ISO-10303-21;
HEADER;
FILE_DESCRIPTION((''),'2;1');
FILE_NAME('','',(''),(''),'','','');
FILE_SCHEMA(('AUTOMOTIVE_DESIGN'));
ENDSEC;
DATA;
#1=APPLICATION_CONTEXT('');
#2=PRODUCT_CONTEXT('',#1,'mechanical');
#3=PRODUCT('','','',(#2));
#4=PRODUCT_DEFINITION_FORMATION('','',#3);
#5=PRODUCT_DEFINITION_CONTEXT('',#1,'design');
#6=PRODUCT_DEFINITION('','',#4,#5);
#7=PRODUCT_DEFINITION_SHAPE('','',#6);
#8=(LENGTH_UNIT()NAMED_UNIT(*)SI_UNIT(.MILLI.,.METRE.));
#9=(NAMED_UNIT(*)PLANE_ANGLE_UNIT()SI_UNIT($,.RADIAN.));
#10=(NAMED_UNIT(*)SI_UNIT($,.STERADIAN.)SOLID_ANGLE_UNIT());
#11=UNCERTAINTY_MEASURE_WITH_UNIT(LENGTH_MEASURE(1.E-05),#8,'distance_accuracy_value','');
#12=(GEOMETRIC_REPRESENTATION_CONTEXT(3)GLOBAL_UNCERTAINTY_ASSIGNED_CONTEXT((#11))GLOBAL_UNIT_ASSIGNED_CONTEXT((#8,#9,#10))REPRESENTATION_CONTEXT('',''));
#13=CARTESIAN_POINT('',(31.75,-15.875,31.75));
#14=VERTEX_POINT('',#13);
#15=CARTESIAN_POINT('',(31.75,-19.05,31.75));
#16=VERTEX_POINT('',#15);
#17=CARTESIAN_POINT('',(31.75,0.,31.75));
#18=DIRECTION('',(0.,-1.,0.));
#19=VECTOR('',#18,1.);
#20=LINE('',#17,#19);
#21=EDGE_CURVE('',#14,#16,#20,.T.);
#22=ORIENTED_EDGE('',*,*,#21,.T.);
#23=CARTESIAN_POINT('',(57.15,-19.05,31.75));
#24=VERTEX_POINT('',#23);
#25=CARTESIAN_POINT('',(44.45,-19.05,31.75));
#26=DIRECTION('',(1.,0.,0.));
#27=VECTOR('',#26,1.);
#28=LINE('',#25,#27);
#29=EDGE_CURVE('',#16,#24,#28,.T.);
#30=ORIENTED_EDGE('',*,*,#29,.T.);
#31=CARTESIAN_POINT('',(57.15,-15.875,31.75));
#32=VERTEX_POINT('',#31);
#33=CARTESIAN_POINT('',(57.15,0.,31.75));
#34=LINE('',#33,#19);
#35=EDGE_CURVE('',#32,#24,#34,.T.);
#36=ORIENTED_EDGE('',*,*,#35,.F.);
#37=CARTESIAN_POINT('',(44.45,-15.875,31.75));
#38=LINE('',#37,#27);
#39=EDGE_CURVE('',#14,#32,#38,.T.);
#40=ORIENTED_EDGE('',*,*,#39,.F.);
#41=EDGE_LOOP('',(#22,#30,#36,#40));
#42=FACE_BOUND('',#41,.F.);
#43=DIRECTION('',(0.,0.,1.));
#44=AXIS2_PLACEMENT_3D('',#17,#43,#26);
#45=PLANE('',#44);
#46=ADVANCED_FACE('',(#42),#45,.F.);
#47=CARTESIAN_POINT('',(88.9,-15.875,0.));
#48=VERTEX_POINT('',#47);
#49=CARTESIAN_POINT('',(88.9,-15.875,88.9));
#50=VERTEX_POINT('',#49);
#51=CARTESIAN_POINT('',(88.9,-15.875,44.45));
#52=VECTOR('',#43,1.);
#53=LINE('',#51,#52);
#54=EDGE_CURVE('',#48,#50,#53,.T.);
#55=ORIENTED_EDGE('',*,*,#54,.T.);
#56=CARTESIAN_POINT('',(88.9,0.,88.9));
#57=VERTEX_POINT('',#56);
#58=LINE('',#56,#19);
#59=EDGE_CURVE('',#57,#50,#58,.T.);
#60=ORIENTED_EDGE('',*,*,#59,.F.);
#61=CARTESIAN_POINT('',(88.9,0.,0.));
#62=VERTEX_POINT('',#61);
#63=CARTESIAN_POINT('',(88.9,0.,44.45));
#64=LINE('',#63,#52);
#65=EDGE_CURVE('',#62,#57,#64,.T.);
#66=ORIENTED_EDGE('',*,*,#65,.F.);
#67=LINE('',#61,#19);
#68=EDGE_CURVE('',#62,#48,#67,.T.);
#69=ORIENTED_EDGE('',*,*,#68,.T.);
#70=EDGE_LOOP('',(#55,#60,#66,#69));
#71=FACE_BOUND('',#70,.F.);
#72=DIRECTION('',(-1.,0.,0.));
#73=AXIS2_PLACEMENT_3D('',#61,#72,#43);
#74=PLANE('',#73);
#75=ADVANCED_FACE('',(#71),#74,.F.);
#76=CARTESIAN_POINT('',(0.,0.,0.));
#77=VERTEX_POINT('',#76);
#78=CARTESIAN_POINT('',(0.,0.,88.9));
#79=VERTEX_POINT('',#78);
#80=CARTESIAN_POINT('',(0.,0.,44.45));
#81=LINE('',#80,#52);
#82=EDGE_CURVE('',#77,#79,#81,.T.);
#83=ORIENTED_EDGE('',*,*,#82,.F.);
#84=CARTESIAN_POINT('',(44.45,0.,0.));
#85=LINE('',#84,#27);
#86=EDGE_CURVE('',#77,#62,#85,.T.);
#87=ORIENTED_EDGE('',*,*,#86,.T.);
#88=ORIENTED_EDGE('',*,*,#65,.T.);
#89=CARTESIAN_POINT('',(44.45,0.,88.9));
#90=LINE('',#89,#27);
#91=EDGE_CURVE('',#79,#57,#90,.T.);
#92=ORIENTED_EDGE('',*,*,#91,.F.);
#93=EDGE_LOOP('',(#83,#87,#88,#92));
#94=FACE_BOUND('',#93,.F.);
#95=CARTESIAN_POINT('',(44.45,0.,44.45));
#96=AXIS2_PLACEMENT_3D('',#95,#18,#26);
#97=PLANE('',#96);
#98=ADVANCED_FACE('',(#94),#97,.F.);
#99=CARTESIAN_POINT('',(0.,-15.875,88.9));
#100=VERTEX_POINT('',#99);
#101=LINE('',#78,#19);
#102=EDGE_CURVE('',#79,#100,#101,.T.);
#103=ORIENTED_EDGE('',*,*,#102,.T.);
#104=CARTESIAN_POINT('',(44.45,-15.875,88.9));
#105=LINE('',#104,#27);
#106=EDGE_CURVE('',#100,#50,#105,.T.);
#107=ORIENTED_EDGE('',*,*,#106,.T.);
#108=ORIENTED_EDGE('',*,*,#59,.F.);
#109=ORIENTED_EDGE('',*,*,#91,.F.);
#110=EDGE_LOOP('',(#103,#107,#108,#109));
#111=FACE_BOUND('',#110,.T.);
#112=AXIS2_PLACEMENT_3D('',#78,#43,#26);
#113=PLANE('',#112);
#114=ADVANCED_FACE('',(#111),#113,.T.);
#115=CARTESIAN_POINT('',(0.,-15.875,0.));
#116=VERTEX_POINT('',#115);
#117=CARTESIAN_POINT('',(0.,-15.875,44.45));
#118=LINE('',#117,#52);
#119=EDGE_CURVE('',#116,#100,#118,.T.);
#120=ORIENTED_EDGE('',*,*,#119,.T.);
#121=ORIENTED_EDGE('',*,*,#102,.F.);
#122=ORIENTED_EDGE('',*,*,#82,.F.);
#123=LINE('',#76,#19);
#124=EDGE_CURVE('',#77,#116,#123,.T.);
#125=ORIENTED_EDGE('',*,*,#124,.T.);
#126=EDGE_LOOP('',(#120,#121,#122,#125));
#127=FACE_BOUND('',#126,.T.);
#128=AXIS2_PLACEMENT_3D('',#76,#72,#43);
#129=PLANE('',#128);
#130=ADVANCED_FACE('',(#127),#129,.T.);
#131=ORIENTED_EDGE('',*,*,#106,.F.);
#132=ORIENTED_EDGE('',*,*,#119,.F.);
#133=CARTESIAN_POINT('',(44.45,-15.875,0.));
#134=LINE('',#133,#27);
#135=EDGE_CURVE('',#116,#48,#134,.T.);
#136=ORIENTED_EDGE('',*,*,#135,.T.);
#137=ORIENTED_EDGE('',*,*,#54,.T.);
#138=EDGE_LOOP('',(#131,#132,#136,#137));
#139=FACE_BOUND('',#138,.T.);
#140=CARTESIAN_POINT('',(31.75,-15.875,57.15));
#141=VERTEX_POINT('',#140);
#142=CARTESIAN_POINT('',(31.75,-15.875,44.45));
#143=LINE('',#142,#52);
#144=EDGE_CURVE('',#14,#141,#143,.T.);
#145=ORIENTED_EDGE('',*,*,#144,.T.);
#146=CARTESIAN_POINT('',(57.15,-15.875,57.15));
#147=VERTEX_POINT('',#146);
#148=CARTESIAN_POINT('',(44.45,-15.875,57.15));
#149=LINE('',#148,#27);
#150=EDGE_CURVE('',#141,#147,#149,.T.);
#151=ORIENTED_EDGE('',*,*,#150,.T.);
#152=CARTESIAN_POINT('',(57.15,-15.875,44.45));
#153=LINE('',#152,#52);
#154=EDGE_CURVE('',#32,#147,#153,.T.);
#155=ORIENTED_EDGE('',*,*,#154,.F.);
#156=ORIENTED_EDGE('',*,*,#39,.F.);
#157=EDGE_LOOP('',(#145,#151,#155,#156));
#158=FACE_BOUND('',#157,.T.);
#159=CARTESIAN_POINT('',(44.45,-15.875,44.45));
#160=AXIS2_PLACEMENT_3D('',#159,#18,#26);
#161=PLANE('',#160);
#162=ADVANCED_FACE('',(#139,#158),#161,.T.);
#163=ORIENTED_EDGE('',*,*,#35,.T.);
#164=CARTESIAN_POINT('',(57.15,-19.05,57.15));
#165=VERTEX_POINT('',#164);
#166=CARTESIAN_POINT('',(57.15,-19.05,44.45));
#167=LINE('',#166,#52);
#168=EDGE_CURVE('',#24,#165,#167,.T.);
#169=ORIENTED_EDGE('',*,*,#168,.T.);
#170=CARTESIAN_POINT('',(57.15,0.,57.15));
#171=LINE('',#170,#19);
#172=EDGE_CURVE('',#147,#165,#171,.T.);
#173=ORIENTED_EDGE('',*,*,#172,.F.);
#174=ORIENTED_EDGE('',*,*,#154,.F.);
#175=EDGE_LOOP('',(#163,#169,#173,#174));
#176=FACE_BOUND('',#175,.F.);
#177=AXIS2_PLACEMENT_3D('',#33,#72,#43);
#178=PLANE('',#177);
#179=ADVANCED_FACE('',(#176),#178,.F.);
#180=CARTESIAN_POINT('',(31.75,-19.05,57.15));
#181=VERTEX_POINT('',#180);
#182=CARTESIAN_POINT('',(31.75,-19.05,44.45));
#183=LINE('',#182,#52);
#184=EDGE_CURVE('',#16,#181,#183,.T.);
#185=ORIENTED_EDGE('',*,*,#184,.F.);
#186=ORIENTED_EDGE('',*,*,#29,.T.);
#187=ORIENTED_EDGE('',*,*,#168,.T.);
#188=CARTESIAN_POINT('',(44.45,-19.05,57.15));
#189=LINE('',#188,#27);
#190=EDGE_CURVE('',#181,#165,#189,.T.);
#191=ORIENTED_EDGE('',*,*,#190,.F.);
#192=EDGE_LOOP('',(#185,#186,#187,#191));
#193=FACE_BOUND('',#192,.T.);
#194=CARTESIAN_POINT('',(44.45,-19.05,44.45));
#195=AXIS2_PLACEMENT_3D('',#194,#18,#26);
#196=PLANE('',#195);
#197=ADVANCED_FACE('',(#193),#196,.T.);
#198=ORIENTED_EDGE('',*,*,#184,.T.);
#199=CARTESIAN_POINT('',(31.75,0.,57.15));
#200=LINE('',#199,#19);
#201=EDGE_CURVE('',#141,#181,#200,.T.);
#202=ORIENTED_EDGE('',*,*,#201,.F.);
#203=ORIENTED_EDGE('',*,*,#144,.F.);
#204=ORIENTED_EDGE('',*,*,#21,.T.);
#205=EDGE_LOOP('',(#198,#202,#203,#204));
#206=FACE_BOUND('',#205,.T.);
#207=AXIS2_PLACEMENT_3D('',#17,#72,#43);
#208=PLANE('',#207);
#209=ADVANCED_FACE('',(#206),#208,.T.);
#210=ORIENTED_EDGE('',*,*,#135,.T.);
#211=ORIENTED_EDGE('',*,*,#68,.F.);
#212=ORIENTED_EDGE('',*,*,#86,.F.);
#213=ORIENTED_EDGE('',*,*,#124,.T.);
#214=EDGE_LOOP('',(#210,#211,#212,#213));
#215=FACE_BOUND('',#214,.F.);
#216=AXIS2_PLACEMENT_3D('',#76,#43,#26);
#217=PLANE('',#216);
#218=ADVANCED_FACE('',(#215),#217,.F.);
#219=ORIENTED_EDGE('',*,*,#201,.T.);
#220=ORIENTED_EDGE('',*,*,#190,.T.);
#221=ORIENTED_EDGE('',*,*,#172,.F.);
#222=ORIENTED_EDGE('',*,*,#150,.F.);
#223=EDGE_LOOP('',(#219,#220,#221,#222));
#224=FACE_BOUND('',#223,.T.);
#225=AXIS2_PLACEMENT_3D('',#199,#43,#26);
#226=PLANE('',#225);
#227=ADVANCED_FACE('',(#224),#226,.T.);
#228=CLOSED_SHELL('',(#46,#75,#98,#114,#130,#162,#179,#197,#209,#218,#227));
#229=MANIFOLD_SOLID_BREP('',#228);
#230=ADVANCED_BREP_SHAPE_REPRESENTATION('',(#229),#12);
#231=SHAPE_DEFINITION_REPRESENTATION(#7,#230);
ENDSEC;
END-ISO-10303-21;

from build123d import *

# Parameters (mm, degrees)
F0_W     = 88.9
F0_H     = 88.9
F0_W_2   = 25.4
F0_H_2   = 25.4
F1_DEPTH = 15.875
F2_DEPTH = 19.05


# Not quite as in the source:
# - a length typed as a fraction of an inch, garbled in the dataset ("3 / 203.2 mm" for 3/8 in), is restored


with BuildPart() as f1:
    # F0 (on Front) → F1 (new body)
    with BuildSketch(Plane.XZ):
        with Locations((44.45, 44.45)):
            Rectangle(F0_W, F0_H)
        with Locations((44.45, 44.45)):
            Rectangle(F0_W_2, F0_H_2, mode=Mode.SUBTRACT)
    extrude(amount=F1_DEPTH)

    # F0 (on Front) → F2 (join)
    with BuildSketch(Plane.XZ):
        with Locations((44.45, 44.45)):
            Rectangle(F0_W_2, F0_H_2)
    extrude(amount=F2_DEPTH)


solid = f1.part
